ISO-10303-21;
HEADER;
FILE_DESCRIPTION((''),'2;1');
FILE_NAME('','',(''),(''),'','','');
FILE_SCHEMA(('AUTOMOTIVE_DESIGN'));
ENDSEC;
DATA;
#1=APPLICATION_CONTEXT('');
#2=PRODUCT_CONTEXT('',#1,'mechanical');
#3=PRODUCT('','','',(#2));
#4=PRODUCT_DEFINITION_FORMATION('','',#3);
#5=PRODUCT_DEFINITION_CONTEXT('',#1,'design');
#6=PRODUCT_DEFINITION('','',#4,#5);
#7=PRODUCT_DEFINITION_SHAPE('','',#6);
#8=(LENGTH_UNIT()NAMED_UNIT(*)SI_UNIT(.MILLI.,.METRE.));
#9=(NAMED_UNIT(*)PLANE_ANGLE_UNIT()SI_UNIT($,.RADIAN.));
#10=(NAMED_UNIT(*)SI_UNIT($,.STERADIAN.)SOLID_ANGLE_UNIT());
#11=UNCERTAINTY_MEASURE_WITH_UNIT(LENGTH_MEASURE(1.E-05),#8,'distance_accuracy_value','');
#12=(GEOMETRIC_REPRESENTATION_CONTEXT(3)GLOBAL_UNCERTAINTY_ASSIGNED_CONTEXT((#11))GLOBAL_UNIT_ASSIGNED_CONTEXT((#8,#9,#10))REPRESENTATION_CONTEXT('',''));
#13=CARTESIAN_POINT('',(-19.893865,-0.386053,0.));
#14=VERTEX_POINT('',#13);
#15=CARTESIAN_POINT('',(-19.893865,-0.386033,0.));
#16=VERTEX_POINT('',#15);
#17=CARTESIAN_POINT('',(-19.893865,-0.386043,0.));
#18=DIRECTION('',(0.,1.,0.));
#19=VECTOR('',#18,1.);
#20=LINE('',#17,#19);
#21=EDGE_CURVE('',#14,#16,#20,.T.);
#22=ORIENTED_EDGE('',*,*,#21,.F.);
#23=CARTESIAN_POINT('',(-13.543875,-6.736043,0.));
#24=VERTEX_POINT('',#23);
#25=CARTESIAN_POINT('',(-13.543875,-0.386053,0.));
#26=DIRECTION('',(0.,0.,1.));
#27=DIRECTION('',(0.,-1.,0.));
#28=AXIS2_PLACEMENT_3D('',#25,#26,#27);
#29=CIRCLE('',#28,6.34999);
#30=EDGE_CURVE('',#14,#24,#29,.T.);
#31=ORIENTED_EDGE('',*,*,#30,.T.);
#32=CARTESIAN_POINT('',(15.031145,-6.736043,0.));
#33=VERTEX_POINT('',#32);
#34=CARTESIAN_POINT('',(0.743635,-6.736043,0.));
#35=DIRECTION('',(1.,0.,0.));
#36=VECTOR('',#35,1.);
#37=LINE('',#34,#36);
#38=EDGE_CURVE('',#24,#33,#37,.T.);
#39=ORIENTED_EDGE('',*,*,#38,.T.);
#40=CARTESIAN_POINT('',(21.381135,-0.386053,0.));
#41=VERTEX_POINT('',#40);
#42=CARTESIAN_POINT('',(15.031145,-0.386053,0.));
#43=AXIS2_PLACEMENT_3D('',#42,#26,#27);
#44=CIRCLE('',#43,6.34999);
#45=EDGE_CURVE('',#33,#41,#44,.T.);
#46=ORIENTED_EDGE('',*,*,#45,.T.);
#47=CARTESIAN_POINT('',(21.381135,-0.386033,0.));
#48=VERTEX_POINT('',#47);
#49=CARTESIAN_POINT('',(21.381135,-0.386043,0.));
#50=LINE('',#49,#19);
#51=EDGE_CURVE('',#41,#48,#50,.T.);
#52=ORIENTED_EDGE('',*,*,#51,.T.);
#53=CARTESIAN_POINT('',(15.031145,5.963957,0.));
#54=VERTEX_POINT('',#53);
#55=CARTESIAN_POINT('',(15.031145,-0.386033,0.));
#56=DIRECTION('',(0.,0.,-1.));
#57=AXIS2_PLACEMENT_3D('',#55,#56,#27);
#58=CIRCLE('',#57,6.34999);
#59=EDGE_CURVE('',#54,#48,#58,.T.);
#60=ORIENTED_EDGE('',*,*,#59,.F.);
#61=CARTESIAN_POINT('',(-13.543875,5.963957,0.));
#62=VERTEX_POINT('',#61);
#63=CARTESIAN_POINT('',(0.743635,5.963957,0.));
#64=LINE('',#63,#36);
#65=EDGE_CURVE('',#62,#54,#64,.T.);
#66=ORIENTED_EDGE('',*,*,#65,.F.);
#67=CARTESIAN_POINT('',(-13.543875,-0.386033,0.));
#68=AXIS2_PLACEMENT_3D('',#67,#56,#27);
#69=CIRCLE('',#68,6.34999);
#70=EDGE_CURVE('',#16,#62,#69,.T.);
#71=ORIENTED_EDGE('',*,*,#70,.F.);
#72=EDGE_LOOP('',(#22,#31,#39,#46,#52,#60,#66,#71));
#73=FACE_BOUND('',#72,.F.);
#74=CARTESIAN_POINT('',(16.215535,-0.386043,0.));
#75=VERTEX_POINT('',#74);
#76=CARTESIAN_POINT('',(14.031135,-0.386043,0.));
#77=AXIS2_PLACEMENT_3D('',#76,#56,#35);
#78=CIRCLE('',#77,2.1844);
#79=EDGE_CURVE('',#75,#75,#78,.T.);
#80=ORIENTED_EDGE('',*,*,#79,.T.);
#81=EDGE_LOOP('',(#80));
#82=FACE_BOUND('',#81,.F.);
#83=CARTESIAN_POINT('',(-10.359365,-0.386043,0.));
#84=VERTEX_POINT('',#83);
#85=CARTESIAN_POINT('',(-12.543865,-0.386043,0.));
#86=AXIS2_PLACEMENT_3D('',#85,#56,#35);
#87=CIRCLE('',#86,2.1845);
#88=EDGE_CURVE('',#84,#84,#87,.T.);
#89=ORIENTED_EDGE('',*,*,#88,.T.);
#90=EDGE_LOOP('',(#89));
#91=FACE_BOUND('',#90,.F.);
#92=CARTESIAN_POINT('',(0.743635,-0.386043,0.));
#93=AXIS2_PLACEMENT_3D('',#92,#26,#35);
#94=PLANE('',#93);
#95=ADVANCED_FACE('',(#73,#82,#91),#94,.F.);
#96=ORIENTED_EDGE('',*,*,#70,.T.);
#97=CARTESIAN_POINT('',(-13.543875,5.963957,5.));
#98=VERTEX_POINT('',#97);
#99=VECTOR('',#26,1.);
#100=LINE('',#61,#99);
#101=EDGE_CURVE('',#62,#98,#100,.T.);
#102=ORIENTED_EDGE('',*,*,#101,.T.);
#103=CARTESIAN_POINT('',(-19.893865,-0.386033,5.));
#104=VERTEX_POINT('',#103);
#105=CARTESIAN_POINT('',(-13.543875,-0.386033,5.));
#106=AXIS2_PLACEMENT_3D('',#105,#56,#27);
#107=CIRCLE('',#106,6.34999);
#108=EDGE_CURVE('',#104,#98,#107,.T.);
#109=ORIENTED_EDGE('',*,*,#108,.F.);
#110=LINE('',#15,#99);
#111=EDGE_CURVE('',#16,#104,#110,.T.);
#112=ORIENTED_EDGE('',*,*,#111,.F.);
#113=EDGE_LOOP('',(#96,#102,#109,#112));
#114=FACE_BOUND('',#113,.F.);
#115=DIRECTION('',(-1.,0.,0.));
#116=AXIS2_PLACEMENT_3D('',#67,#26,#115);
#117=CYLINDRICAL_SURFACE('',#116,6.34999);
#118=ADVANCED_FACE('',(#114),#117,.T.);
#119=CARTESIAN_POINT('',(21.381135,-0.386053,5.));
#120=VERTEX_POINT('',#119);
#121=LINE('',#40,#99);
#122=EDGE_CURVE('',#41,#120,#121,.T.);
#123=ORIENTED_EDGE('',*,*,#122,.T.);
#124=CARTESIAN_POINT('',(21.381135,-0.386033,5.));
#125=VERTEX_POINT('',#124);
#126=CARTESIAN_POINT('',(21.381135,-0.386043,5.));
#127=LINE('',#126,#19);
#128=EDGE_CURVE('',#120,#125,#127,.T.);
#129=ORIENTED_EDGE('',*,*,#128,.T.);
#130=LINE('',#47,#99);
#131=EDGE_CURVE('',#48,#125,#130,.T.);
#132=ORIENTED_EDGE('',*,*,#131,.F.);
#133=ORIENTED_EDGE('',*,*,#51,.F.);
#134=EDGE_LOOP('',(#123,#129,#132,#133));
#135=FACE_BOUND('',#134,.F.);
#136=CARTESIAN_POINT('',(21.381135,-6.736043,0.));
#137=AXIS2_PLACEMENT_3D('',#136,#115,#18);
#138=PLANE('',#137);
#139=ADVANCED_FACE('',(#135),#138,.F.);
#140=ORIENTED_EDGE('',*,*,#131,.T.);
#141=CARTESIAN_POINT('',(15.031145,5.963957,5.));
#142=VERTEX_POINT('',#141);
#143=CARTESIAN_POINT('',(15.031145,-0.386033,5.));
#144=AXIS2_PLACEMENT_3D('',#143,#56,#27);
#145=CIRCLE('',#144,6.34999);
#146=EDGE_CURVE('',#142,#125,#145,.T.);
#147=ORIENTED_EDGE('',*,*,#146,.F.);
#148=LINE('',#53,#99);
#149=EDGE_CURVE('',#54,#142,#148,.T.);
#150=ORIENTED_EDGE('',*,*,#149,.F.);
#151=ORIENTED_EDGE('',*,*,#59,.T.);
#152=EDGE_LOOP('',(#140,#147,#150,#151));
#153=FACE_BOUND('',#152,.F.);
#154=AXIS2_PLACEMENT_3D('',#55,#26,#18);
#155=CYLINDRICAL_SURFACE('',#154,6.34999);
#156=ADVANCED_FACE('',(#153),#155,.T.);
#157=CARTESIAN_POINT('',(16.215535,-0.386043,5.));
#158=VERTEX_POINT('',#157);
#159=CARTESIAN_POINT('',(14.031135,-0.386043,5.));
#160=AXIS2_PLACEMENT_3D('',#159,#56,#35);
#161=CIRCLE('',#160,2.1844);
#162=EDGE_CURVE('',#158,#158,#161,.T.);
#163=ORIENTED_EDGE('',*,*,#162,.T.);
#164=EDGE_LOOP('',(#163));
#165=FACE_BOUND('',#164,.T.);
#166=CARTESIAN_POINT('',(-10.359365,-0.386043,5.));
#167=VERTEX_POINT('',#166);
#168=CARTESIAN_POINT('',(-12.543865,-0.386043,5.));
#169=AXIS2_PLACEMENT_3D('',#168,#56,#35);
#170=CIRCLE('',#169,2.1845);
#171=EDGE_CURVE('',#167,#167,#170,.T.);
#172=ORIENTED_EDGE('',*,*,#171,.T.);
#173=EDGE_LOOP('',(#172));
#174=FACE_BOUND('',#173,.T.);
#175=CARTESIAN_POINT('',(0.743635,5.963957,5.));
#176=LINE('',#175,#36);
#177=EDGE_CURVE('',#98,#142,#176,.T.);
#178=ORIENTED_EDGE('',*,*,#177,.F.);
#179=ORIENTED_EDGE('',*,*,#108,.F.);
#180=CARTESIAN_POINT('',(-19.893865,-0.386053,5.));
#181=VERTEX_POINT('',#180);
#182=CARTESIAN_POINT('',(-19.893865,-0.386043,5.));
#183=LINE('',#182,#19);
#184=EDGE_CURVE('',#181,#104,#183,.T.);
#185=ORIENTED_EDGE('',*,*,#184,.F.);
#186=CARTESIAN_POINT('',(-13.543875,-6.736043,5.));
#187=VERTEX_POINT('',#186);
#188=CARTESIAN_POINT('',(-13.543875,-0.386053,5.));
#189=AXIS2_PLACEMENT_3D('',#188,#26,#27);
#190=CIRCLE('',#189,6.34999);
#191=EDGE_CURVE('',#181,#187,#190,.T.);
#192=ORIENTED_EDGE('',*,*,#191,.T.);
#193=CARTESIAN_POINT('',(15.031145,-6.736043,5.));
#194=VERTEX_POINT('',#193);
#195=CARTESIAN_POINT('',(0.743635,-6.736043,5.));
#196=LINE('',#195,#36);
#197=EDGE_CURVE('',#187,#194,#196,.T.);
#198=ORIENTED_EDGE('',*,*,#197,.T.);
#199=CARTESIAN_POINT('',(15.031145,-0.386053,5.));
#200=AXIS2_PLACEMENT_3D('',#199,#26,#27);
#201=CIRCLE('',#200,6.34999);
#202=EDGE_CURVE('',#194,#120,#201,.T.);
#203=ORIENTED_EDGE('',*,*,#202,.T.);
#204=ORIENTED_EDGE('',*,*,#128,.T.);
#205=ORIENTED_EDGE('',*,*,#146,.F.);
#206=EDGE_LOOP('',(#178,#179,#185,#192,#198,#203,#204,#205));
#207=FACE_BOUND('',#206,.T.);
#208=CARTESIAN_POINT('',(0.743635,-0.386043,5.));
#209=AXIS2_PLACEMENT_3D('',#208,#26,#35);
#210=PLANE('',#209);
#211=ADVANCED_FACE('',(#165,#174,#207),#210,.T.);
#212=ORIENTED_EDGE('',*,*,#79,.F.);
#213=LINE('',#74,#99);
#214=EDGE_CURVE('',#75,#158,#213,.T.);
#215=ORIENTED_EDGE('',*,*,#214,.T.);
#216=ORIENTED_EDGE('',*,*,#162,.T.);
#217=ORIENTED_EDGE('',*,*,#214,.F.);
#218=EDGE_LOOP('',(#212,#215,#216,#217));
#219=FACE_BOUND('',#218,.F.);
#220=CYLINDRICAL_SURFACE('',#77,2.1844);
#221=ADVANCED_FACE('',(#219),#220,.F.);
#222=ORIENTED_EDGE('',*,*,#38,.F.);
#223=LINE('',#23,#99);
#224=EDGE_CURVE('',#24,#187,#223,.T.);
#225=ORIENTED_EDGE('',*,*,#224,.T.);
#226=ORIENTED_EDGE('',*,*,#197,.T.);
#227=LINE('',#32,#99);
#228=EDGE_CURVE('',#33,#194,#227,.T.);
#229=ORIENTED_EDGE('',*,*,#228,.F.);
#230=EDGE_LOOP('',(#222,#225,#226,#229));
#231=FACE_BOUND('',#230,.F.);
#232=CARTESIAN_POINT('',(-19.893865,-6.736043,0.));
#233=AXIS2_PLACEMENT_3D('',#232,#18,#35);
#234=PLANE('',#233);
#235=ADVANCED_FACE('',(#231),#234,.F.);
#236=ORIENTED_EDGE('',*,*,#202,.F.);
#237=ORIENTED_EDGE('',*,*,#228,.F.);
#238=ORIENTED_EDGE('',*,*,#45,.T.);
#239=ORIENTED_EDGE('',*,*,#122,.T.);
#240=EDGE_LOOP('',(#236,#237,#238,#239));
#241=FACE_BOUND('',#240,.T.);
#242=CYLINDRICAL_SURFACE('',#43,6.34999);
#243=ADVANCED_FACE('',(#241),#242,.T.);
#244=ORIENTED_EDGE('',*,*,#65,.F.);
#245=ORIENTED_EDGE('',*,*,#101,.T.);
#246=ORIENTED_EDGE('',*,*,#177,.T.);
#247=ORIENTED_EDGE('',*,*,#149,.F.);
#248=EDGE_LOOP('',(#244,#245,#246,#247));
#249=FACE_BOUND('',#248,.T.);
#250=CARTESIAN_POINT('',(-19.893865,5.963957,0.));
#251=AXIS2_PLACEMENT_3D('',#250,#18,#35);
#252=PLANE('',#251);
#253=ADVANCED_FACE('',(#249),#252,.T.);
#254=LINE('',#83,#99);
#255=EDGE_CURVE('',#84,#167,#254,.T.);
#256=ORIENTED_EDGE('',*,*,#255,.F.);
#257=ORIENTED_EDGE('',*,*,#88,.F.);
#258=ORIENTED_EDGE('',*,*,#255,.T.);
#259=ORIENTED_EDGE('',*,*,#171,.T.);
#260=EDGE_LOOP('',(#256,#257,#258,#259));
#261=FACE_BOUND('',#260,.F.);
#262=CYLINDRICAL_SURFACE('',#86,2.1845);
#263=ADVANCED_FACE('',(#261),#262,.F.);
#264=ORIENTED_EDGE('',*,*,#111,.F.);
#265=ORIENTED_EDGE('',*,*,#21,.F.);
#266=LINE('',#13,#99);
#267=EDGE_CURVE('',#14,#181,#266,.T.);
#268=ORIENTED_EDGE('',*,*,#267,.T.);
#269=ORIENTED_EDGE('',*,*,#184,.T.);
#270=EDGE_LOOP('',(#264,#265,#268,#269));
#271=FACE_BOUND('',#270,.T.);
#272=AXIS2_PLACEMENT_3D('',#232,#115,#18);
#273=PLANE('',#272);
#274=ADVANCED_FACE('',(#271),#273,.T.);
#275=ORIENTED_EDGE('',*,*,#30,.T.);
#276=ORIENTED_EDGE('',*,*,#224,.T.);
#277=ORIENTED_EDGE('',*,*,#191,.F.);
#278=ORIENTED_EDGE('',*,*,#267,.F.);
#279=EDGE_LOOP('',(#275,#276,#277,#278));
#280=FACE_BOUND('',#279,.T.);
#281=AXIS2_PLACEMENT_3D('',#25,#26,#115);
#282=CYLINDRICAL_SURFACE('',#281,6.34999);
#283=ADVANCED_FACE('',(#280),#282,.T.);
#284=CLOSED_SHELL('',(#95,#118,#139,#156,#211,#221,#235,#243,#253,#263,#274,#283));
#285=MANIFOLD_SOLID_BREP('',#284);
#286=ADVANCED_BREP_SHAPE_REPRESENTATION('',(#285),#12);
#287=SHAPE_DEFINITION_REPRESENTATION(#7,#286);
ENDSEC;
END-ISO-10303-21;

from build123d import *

# Parameters (mm, degrees)
F0_W     = 41.275
F0_H     = 12.7
F1_DEPTH = 5
F2_R     = 2.1845
F2_R_2   = 2.1844
F3_DEPTH = 25
F4_R     = 6.34999


# Not quite as in the source:
# - a fillet or chamfer is up to 0.001 mm smaller than in the source, because OpenCascade refuses the exact size


with BuildPart() as f1:
    # F0 (on Top) → F1 (new body)
    with BuildSketch(Plane.XY):
        with Locations((0.7436354645, -0.3860430318)):
            Rectangle(F0_W, F0_H)
    extrude(amount=F1_DEPTH)

    # F2 (on face) → F3 (cut)
    with BuildSketch(Plane(origin=(0, 0, 0), x_dir=(1, 0, 0), z_dir=(0, 0, -1))):
        with Locations((-12.5438645355, 0.3860430318)):
            Circle(F2_R)
        with Locations((14.0311354645, 0.3860430318)):
            Circle(F2_R_2)
    extrude(amount=-F3_DEPTH, mode=Mode.SUBTRACT)

    # F4 (radius 6.35 in the source; OpenCascade refuses exactly that, so slightly less here)
    f4_edges = [f1.edges().sort_by_distance(p)[0] for p in [
        (21.381135, -6.736043, 2.5),
        (21.381135, 5.963957, 2.5),
        (-19.893865, -6.736043, 2.5),
        (-19.893865, 5.963957, 2.5),
    ]]
    fillet(f4_edges, radius=F4_R)


solid = f1.part
